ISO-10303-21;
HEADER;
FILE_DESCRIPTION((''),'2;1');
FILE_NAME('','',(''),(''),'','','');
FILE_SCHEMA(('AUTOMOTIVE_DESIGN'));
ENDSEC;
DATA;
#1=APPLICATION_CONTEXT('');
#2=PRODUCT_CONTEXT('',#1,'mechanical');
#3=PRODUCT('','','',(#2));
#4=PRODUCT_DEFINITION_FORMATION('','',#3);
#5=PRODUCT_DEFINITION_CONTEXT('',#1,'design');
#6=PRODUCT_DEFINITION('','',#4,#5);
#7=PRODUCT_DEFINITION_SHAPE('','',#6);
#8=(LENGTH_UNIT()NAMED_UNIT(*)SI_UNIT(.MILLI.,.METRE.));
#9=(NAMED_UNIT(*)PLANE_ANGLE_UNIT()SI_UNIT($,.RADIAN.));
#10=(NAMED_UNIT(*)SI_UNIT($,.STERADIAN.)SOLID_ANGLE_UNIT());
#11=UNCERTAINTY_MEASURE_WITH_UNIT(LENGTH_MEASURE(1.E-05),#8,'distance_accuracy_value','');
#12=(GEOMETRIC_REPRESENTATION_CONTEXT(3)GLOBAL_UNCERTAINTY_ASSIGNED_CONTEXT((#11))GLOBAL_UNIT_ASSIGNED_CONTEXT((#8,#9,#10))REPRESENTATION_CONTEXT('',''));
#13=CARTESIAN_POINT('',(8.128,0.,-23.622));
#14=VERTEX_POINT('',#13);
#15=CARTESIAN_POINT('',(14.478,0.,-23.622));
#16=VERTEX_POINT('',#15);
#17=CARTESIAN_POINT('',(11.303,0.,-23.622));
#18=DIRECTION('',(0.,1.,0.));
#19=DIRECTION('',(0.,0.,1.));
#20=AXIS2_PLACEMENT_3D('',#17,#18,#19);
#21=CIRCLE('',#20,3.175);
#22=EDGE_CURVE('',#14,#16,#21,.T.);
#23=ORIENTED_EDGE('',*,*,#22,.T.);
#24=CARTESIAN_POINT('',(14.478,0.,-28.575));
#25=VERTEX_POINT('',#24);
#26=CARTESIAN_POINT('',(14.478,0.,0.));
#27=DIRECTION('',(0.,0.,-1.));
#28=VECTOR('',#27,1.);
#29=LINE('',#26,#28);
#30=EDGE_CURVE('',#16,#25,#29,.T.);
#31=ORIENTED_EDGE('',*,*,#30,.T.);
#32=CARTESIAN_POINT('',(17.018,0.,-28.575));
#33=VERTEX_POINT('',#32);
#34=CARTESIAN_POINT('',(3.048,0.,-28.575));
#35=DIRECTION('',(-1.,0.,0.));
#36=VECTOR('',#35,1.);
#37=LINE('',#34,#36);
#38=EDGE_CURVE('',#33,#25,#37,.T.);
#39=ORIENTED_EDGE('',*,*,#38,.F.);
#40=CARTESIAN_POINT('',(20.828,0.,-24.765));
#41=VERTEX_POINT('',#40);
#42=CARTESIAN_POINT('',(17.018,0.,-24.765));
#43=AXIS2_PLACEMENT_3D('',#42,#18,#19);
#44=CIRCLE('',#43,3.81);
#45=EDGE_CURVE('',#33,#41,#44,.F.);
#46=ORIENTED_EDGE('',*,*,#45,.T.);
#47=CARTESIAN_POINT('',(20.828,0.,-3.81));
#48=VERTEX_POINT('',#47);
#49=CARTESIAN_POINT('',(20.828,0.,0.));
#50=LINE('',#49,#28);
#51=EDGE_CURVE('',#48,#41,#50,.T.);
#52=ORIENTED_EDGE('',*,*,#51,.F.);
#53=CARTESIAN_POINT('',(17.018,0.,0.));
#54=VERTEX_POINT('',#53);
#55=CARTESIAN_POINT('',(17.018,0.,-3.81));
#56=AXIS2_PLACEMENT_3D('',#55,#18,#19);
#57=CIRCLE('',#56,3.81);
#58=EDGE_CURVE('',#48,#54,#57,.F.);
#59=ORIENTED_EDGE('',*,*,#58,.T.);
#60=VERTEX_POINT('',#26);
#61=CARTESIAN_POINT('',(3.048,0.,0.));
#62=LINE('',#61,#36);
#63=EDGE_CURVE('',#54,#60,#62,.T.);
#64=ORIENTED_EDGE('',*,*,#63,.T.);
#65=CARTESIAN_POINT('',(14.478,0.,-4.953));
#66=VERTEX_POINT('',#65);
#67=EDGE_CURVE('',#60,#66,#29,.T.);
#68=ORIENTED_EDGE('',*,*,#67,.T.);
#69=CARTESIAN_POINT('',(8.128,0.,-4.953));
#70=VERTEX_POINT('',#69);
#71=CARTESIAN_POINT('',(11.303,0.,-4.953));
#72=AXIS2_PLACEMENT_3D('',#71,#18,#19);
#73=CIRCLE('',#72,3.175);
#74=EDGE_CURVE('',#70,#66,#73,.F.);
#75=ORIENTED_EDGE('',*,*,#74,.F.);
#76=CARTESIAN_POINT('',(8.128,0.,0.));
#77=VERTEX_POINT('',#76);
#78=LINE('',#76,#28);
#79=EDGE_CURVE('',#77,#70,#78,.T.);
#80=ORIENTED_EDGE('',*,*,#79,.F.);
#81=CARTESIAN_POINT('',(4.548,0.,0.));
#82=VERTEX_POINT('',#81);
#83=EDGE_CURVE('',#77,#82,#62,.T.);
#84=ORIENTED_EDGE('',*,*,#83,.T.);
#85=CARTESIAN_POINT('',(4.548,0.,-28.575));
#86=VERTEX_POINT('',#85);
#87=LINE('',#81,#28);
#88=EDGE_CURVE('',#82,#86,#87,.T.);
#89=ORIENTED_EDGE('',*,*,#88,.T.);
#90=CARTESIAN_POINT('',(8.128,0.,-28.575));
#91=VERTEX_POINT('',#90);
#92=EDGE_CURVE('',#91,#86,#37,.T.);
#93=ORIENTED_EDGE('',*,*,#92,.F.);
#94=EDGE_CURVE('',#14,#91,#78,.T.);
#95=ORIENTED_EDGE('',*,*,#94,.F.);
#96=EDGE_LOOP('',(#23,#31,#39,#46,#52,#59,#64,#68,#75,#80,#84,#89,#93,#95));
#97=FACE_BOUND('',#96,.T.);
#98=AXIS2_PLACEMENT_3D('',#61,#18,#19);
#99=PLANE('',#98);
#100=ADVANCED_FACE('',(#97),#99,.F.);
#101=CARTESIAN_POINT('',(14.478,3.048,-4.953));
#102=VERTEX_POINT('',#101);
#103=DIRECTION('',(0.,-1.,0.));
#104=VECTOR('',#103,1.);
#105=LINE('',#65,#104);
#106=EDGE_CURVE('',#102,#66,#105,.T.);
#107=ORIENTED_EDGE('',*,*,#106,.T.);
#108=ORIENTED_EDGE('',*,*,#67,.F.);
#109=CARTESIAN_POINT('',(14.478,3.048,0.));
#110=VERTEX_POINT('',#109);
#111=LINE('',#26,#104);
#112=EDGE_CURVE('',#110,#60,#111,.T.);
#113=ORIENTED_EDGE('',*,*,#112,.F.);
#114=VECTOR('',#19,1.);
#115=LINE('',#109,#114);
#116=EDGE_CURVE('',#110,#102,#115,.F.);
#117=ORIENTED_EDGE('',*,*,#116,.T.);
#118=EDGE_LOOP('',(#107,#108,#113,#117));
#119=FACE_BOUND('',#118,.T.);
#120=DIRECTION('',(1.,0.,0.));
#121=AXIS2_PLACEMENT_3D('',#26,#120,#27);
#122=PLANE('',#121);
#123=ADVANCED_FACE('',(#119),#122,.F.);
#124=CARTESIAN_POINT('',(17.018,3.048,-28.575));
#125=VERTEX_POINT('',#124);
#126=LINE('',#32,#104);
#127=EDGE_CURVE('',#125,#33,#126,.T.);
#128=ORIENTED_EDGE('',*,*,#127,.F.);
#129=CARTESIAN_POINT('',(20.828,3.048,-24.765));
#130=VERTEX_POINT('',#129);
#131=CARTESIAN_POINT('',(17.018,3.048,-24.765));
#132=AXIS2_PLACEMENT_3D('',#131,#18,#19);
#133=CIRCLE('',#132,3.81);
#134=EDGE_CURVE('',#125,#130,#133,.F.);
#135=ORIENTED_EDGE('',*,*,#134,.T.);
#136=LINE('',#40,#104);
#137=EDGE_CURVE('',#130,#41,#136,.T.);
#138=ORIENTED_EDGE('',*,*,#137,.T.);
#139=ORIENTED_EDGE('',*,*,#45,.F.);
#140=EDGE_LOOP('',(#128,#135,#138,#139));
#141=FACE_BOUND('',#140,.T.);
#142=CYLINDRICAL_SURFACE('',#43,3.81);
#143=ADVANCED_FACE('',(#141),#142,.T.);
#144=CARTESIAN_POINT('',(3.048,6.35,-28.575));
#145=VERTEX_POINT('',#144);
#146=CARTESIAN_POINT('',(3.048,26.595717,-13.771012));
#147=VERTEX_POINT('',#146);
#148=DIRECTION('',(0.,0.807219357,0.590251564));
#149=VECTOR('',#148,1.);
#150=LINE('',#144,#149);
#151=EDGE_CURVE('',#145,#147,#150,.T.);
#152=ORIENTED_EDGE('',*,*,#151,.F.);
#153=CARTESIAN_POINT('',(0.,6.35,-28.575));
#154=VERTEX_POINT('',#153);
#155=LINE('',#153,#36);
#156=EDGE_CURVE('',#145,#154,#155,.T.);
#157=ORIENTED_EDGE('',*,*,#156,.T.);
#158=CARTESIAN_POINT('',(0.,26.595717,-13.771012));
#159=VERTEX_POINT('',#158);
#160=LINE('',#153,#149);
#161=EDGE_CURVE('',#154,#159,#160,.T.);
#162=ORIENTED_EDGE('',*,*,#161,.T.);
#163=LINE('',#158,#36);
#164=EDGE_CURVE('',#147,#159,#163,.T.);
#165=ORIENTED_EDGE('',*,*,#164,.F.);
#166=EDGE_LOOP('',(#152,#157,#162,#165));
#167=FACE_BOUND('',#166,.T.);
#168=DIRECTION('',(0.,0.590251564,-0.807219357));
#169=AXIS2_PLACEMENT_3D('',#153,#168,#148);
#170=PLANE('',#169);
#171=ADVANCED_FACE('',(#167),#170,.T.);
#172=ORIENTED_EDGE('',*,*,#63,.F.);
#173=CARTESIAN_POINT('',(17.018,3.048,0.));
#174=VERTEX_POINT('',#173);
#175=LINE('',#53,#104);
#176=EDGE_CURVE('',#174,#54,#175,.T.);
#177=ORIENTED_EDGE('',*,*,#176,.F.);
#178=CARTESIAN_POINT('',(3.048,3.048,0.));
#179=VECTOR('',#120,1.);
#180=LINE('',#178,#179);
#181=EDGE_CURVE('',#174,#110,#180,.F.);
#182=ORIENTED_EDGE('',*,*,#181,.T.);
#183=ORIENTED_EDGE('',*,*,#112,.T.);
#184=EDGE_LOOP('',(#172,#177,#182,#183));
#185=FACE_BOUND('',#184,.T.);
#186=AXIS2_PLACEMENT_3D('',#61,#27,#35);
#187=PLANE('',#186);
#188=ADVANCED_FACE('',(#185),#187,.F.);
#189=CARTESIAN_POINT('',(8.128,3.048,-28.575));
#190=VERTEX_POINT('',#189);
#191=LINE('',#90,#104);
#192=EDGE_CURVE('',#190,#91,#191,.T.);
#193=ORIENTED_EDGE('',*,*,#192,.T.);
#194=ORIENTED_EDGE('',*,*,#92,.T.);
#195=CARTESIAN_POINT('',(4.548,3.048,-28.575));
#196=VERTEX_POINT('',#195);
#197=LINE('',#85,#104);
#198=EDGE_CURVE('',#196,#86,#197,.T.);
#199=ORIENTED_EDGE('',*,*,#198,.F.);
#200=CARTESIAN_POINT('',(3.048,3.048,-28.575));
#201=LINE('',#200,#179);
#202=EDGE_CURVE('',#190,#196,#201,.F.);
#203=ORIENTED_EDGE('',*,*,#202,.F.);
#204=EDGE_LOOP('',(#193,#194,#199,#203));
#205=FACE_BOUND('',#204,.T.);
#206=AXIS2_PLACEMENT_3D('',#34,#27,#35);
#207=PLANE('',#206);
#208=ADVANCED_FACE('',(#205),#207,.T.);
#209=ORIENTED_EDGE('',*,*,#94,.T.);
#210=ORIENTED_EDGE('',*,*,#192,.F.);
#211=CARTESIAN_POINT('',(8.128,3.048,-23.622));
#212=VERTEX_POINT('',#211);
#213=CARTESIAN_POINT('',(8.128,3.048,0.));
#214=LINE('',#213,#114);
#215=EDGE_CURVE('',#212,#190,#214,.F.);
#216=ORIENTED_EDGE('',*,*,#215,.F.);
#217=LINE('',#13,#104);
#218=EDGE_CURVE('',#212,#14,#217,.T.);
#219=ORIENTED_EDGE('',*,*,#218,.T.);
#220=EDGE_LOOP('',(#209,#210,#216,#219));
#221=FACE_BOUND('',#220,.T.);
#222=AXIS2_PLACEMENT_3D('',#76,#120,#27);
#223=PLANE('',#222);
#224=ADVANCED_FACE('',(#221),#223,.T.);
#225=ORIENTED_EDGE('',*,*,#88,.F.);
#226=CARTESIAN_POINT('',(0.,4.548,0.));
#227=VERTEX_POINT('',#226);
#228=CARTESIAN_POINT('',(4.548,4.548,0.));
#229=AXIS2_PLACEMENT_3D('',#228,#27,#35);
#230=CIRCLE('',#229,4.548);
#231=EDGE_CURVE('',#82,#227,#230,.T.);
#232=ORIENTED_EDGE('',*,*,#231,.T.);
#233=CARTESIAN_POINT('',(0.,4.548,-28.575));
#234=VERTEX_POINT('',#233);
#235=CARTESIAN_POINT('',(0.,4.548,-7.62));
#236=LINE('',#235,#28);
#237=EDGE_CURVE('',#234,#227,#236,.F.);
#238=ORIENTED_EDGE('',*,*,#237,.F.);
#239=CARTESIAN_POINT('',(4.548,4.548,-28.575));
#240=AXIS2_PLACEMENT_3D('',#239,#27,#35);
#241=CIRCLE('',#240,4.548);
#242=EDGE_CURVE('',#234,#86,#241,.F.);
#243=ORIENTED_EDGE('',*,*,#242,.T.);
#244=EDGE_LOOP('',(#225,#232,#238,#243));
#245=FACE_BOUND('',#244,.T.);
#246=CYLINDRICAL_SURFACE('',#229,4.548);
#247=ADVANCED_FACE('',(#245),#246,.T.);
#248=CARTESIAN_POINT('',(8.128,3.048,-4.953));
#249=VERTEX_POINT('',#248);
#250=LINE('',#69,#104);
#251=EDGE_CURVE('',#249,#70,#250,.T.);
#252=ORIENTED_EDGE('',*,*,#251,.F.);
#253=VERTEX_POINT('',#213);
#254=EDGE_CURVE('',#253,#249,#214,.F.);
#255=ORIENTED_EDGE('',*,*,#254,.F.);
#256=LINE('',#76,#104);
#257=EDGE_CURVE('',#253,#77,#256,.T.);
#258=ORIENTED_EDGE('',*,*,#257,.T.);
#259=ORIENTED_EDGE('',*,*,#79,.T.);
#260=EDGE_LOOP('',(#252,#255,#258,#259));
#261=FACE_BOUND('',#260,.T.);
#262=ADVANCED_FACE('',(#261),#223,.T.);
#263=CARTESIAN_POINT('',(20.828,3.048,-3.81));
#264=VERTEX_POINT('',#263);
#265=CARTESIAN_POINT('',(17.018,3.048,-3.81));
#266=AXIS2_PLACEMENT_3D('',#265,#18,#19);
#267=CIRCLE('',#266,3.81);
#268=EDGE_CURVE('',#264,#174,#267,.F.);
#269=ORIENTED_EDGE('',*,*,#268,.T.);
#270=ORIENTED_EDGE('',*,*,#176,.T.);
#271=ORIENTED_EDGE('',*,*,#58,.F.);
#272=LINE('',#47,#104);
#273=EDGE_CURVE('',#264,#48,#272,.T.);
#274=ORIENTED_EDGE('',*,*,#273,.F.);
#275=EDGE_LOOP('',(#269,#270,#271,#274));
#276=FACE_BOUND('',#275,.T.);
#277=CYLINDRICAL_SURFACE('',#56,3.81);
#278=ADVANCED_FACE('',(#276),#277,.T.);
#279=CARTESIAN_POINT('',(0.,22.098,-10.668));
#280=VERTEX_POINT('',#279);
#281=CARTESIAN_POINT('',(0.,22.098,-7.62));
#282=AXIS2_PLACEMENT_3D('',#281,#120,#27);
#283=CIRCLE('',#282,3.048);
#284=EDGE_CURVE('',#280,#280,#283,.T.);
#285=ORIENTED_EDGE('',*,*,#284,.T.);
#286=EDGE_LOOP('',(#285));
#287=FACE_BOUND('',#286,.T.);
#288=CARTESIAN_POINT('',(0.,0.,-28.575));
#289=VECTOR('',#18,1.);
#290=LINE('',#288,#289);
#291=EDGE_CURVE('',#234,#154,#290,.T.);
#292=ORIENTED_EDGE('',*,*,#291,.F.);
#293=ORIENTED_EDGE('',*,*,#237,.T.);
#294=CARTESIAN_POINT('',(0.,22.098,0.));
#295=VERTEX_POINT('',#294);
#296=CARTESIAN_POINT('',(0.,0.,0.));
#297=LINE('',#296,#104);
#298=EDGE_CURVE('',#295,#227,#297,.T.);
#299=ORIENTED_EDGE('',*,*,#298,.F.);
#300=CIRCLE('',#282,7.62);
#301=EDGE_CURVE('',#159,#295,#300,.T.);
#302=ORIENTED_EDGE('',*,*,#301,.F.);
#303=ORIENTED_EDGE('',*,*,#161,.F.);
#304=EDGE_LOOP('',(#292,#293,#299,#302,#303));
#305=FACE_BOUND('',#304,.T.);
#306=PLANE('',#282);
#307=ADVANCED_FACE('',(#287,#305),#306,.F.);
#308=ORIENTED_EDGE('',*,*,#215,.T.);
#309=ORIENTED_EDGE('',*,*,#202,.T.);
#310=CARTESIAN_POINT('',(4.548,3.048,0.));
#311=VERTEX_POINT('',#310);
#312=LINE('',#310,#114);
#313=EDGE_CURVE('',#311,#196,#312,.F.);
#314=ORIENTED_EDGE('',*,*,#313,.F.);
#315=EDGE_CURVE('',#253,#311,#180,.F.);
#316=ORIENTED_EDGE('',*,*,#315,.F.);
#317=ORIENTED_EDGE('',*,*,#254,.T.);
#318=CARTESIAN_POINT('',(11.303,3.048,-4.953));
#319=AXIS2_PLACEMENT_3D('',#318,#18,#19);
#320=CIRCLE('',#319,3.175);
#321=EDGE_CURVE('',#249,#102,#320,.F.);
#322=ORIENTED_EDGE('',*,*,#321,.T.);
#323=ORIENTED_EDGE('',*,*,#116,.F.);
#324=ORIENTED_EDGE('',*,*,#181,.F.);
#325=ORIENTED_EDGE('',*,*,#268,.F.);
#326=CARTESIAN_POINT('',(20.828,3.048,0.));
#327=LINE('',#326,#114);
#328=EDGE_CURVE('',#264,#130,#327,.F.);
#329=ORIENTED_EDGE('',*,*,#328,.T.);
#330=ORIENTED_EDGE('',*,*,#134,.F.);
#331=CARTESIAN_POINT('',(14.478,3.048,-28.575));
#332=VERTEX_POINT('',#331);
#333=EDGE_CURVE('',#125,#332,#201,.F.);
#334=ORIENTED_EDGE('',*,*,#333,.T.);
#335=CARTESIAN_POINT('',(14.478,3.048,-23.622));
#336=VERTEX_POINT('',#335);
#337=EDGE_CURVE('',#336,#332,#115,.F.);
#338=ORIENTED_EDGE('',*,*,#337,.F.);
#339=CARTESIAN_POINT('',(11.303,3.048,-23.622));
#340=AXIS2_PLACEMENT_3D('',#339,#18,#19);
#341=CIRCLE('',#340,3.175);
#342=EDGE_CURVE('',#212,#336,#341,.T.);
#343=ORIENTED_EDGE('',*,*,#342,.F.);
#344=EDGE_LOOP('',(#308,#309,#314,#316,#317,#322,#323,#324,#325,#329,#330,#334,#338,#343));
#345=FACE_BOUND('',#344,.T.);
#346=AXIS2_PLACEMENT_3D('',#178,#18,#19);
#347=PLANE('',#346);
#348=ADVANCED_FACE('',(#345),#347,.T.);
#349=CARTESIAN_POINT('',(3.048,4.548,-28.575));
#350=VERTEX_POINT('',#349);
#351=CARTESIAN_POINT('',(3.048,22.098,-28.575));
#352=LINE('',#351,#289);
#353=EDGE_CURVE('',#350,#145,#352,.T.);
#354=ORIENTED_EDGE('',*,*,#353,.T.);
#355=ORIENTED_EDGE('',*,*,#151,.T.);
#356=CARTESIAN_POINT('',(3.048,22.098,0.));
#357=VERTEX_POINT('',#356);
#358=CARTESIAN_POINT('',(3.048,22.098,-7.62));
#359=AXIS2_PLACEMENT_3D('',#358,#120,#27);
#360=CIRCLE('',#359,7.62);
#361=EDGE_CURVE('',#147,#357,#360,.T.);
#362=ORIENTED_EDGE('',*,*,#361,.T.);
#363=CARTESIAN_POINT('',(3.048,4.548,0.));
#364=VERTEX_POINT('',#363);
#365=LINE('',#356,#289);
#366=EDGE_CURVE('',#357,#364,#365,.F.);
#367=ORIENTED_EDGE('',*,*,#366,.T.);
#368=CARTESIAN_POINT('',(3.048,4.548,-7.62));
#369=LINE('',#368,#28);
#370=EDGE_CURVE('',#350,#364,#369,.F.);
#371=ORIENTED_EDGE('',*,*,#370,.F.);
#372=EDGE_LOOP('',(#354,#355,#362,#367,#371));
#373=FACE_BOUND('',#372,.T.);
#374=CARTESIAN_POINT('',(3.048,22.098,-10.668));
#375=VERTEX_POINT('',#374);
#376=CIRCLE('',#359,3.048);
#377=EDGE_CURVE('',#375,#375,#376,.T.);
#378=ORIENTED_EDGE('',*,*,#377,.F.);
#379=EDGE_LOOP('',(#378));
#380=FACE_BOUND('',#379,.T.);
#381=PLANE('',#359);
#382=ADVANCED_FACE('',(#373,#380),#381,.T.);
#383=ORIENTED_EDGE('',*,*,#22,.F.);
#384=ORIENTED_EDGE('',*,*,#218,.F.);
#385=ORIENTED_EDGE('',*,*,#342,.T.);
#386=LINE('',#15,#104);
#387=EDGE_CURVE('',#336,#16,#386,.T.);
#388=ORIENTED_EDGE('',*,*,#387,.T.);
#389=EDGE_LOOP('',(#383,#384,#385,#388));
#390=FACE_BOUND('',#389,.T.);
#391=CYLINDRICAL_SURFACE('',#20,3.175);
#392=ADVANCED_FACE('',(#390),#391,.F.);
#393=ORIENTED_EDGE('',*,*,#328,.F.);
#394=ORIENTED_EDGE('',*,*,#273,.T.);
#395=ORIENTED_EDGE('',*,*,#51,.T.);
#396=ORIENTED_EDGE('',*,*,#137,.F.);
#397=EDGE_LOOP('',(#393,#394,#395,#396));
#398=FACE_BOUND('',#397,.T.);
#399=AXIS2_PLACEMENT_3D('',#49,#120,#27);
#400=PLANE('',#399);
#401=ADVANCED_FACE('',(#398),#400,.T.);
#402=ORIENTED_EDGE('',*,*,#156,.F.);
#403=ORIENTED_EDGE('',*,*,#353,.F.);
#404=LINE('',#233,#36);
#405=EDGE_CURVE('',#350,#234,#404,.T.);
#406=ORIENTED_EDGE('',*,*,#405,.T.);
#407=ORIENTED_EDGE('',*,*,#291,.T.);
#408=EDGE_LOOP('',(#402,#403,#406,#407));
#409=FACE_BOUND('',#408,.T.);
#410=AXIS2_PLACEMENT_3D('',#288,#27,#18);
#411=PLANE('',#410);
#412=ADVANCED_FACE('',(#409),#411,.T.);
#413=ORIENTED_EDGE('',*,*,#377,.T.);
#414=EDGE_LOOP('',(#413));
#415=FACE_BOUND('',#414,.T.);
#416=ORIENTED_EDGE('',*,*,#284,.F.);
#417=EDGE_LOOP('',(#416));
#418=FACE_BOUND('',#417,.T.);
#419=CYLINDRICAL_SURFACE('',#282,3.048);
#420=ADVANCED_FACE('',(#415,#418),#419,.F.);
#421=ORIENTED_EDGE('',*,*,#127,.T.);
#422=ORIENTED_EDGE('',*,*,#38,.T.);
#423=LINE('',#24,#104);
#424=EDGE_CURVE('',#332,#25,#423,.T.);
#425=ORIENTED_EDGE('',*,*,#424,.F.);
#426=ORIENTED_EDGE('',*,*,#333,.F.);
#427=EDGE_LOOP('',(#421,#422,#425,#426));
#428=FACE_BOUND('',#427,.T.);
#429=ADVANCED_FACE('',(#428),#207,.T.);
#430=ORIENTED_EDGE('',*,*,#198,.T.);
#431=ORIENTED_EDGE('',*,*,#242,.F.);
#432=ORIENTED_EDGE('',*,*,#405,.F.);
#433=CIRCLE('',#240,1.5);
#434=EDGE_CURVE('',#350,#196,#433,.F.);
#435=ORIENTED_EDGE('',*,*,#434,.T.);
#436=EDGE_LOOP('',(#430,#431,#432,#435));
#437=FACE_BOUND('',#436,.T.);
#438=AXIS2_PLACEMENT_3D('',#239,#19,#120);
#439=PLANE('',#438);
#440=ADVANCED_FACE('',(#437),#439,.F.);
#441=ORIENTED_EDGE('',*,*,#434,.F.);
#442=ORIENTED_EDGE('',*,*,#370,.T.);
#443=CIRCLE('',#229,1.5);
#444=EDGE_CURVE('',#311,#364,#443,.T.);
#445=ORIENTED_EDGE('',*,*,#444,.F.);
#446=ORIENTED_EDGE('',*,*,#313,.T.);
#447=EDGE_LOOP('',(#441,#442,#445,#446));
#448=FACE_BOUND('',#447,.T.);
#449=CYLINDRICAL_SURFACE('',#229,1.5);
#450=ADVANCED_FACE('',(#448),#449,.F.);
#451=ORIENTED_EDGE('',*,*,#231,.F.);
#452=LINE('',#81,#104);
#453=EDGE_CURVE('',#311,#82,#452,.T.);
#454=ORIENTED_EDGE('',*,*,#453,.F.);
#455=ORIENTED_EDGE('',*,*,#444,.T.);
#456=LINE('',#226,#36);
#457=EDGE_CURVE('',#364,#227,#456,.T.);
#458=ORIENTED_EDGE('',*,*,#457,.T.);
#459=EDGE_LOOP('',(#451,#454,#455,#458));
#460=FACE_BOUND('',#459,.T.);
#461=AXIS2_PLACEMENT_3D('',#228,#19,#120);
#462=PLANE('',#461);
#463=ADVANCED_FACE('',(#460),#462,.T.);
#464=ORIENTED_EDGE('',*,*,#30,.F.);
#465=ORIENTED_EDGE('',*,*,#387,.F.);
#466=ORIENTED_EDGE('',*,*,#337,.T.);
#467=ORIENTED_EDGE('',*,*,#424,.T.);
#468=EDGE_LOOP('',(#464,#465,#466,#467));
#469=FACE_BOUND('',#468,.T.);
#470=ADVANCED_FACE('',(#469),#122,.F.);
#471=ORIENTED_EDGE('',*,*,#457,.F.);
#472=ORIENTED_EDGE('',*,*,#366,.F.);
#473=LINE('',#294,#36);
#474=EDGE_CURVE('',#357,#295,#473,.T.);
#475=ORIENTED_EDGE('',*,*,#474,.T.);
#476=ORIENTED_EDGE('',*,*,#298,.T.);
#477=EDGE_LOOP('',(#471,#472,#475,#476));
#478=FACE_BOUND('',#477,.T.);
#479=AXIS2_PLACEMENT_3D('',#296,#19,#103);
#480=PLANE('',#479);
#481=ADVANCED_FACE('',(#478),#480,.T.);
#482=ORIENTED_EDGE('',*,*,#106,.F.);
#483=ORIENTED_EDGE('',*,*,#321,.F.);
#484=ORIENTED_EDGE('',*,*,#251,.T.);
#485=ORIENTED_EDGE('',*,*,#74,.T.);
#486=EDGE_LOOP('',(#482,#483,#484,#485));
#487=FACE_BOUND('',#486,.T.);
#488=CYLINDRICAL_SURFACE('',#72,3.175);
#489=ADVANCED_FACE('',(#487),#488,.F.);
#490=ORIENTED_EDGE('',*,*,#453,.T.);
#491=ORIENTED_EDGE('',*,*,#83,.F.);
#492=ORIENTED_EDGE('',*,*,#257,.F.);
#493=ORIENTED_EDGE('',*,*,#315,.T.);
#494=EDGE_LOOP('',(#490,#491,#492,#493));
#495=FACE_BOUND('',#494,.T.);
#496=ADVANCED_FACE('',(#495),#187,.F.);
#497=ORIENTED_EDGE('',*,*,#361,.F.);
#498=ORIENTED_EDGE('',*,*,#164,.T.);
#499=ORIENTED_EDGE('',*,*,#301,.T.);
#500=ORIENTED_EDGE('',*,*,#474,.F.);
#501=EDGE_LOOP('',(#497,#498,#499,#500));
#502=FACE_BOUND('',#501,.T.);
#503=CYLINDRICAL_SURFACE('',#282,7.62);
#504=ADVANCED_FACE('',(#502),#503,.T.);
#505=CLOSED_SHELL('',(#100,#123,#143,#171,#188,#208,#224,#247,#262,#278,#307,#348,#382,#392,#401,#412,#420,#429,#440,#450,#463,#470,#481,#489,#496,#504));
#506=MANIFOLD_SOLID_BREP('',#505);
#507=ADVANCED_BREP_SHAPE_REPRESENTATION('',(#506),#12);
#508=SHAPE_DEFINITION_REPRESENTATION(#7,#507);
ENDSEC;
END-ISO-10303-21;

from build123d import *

# Parameters (mm, degrees)
SKETCH1_R              = 3.048
BOSS_EXTRUDE1_DEPTH    = 3.048
SKETCH2_W              = 28.575
SKETCH2_H              = 3.048
BOSS_EXTRUDE2_DEPTH    = 17.78
CUT_EXTRUDE1_DEPTH     = 45.290237175
FILLET1_R              = 3.81
CONVERT_SOLID1_START   = -28.575
CONVERT_SOLID1_DEPTH   = 28.575
CONVERT_SOLID1_2_DEPTH = 28.575


# Read off the part's stored shape, not the designer's step: Convert-Solid1
with BuildPart() as part:
    # Sketch1 → Boss-Extrude1 (new body)
    with BuildSketch(Plane(origin=(0, 0, 0), x_dir=(0, 0, -1), z_dir=(1, 0, 0))):
        with BuildLine():
            Line((28.575, 6.35), (13.771011503, 26.59571692))
            ThreePointArc((13.771011503, 26.59571692), (5.254234548, 29.341449028), (0, 22.098))
            Line((0, 22.098), (0, 0))
            Line((0, 0), (28.575, 0))
            Line((28.575, 0), (28.575, 6.35))
        make_face()
        with Locations(Location((7.62, 22.098, 0), (0, 0, 180))):
            Circle(SKETCH1_R, mode=Mode.SUBTRACT)
    extrude(amount=BOSS_EXTRUDE1_DEPTH)

    # Sketch2 → Boss-Extrude2 (add)
    with BuildSketch(Plane(origin=(3.048, 0, 0), x_dir=(0, 0, -1), z_dir=(1, 0, 0))):
        with Locations((14.2875, 1.524)):
            Rectangle(SKETCH2_W, SKETCH2_H)
    extrude(amount=BOSS_EXTRUDE2_DEPTH)

    # Sketch3 → Cut-Extrude1 (cut, through all)
    with BuildSketch(Plane(origin=(0, 3.048, 0), x_dir=(1, 0, 0), z_dir=(0, 1, 0))):
        with BuildLine():
            Line((8.128, 4.953), (8.128, 0))
            Line((8.128, 0), (14.478, 0))
            Line((14.478, 0), (14.478, 4.953))
            ThreePointArc((14.478, 4.953), (11.303, 8.128), (8.128, 4.953))
        make_face()
        with BuildLine():
            Line((8.128, 28.575), (8.128, 23.622))
            ThreePointArc((8.128, 23.622), (11.303, 20.447), (14.478, 23.622))
            Line((14.478, 23.622), (14.478, 28.575))
            Line((14.478, 28.575), (8.128, 28.575))
        make_face()
    extrude(amount=-CUT_EXTRUDE1_DEPTH, mode=Mode.SUBTRACT)

    # Fillet1
    fillet1_edges = [part.edges().sort_by_distance(p)[0] for p in [
        (20.828, 1.524, 0),
        (20.828, 1.524, -28.575),
    ]]
    fillet(fillet1_edges, radius=FILLET1_R)

    # Convert-Solid1 outline → Convert-Solid1 (cut)
    with BuildSketch(Plane.XY.offset(CONVERT_SOLID1_START)):
        with BuildLine():
            Line((0, 0), (4.548, 0))
            ThreePointArc((4.548, 0), (1.332078359, 1.332078359), (0, 4.548))
            Line((0, 4.548), (0, 0))
        make_face()
    extrude(amount=CONVERT_SOLID1_DEPTH, mode=Mode.SUBTRACT)

    # Convert-Solid1 2 outline → Convert-Solid1 2 (add)
    with BuildSketch(Plane.XY.offset(CONVERT_SOLID1_START)):
        with BuildLine():
            Line((3.048, 3.048), (4.548, 3.048))
            ThreePointArc((4.548, 3.048), (3.487339828, 3.487339828), (3.048, 4.548))
            Line((3.048, 4.548), (3.048, 3.048))
        make_face()
    extrude(amount=CONVERT_SOLID1_2_DEPTH)


solid = part.part
